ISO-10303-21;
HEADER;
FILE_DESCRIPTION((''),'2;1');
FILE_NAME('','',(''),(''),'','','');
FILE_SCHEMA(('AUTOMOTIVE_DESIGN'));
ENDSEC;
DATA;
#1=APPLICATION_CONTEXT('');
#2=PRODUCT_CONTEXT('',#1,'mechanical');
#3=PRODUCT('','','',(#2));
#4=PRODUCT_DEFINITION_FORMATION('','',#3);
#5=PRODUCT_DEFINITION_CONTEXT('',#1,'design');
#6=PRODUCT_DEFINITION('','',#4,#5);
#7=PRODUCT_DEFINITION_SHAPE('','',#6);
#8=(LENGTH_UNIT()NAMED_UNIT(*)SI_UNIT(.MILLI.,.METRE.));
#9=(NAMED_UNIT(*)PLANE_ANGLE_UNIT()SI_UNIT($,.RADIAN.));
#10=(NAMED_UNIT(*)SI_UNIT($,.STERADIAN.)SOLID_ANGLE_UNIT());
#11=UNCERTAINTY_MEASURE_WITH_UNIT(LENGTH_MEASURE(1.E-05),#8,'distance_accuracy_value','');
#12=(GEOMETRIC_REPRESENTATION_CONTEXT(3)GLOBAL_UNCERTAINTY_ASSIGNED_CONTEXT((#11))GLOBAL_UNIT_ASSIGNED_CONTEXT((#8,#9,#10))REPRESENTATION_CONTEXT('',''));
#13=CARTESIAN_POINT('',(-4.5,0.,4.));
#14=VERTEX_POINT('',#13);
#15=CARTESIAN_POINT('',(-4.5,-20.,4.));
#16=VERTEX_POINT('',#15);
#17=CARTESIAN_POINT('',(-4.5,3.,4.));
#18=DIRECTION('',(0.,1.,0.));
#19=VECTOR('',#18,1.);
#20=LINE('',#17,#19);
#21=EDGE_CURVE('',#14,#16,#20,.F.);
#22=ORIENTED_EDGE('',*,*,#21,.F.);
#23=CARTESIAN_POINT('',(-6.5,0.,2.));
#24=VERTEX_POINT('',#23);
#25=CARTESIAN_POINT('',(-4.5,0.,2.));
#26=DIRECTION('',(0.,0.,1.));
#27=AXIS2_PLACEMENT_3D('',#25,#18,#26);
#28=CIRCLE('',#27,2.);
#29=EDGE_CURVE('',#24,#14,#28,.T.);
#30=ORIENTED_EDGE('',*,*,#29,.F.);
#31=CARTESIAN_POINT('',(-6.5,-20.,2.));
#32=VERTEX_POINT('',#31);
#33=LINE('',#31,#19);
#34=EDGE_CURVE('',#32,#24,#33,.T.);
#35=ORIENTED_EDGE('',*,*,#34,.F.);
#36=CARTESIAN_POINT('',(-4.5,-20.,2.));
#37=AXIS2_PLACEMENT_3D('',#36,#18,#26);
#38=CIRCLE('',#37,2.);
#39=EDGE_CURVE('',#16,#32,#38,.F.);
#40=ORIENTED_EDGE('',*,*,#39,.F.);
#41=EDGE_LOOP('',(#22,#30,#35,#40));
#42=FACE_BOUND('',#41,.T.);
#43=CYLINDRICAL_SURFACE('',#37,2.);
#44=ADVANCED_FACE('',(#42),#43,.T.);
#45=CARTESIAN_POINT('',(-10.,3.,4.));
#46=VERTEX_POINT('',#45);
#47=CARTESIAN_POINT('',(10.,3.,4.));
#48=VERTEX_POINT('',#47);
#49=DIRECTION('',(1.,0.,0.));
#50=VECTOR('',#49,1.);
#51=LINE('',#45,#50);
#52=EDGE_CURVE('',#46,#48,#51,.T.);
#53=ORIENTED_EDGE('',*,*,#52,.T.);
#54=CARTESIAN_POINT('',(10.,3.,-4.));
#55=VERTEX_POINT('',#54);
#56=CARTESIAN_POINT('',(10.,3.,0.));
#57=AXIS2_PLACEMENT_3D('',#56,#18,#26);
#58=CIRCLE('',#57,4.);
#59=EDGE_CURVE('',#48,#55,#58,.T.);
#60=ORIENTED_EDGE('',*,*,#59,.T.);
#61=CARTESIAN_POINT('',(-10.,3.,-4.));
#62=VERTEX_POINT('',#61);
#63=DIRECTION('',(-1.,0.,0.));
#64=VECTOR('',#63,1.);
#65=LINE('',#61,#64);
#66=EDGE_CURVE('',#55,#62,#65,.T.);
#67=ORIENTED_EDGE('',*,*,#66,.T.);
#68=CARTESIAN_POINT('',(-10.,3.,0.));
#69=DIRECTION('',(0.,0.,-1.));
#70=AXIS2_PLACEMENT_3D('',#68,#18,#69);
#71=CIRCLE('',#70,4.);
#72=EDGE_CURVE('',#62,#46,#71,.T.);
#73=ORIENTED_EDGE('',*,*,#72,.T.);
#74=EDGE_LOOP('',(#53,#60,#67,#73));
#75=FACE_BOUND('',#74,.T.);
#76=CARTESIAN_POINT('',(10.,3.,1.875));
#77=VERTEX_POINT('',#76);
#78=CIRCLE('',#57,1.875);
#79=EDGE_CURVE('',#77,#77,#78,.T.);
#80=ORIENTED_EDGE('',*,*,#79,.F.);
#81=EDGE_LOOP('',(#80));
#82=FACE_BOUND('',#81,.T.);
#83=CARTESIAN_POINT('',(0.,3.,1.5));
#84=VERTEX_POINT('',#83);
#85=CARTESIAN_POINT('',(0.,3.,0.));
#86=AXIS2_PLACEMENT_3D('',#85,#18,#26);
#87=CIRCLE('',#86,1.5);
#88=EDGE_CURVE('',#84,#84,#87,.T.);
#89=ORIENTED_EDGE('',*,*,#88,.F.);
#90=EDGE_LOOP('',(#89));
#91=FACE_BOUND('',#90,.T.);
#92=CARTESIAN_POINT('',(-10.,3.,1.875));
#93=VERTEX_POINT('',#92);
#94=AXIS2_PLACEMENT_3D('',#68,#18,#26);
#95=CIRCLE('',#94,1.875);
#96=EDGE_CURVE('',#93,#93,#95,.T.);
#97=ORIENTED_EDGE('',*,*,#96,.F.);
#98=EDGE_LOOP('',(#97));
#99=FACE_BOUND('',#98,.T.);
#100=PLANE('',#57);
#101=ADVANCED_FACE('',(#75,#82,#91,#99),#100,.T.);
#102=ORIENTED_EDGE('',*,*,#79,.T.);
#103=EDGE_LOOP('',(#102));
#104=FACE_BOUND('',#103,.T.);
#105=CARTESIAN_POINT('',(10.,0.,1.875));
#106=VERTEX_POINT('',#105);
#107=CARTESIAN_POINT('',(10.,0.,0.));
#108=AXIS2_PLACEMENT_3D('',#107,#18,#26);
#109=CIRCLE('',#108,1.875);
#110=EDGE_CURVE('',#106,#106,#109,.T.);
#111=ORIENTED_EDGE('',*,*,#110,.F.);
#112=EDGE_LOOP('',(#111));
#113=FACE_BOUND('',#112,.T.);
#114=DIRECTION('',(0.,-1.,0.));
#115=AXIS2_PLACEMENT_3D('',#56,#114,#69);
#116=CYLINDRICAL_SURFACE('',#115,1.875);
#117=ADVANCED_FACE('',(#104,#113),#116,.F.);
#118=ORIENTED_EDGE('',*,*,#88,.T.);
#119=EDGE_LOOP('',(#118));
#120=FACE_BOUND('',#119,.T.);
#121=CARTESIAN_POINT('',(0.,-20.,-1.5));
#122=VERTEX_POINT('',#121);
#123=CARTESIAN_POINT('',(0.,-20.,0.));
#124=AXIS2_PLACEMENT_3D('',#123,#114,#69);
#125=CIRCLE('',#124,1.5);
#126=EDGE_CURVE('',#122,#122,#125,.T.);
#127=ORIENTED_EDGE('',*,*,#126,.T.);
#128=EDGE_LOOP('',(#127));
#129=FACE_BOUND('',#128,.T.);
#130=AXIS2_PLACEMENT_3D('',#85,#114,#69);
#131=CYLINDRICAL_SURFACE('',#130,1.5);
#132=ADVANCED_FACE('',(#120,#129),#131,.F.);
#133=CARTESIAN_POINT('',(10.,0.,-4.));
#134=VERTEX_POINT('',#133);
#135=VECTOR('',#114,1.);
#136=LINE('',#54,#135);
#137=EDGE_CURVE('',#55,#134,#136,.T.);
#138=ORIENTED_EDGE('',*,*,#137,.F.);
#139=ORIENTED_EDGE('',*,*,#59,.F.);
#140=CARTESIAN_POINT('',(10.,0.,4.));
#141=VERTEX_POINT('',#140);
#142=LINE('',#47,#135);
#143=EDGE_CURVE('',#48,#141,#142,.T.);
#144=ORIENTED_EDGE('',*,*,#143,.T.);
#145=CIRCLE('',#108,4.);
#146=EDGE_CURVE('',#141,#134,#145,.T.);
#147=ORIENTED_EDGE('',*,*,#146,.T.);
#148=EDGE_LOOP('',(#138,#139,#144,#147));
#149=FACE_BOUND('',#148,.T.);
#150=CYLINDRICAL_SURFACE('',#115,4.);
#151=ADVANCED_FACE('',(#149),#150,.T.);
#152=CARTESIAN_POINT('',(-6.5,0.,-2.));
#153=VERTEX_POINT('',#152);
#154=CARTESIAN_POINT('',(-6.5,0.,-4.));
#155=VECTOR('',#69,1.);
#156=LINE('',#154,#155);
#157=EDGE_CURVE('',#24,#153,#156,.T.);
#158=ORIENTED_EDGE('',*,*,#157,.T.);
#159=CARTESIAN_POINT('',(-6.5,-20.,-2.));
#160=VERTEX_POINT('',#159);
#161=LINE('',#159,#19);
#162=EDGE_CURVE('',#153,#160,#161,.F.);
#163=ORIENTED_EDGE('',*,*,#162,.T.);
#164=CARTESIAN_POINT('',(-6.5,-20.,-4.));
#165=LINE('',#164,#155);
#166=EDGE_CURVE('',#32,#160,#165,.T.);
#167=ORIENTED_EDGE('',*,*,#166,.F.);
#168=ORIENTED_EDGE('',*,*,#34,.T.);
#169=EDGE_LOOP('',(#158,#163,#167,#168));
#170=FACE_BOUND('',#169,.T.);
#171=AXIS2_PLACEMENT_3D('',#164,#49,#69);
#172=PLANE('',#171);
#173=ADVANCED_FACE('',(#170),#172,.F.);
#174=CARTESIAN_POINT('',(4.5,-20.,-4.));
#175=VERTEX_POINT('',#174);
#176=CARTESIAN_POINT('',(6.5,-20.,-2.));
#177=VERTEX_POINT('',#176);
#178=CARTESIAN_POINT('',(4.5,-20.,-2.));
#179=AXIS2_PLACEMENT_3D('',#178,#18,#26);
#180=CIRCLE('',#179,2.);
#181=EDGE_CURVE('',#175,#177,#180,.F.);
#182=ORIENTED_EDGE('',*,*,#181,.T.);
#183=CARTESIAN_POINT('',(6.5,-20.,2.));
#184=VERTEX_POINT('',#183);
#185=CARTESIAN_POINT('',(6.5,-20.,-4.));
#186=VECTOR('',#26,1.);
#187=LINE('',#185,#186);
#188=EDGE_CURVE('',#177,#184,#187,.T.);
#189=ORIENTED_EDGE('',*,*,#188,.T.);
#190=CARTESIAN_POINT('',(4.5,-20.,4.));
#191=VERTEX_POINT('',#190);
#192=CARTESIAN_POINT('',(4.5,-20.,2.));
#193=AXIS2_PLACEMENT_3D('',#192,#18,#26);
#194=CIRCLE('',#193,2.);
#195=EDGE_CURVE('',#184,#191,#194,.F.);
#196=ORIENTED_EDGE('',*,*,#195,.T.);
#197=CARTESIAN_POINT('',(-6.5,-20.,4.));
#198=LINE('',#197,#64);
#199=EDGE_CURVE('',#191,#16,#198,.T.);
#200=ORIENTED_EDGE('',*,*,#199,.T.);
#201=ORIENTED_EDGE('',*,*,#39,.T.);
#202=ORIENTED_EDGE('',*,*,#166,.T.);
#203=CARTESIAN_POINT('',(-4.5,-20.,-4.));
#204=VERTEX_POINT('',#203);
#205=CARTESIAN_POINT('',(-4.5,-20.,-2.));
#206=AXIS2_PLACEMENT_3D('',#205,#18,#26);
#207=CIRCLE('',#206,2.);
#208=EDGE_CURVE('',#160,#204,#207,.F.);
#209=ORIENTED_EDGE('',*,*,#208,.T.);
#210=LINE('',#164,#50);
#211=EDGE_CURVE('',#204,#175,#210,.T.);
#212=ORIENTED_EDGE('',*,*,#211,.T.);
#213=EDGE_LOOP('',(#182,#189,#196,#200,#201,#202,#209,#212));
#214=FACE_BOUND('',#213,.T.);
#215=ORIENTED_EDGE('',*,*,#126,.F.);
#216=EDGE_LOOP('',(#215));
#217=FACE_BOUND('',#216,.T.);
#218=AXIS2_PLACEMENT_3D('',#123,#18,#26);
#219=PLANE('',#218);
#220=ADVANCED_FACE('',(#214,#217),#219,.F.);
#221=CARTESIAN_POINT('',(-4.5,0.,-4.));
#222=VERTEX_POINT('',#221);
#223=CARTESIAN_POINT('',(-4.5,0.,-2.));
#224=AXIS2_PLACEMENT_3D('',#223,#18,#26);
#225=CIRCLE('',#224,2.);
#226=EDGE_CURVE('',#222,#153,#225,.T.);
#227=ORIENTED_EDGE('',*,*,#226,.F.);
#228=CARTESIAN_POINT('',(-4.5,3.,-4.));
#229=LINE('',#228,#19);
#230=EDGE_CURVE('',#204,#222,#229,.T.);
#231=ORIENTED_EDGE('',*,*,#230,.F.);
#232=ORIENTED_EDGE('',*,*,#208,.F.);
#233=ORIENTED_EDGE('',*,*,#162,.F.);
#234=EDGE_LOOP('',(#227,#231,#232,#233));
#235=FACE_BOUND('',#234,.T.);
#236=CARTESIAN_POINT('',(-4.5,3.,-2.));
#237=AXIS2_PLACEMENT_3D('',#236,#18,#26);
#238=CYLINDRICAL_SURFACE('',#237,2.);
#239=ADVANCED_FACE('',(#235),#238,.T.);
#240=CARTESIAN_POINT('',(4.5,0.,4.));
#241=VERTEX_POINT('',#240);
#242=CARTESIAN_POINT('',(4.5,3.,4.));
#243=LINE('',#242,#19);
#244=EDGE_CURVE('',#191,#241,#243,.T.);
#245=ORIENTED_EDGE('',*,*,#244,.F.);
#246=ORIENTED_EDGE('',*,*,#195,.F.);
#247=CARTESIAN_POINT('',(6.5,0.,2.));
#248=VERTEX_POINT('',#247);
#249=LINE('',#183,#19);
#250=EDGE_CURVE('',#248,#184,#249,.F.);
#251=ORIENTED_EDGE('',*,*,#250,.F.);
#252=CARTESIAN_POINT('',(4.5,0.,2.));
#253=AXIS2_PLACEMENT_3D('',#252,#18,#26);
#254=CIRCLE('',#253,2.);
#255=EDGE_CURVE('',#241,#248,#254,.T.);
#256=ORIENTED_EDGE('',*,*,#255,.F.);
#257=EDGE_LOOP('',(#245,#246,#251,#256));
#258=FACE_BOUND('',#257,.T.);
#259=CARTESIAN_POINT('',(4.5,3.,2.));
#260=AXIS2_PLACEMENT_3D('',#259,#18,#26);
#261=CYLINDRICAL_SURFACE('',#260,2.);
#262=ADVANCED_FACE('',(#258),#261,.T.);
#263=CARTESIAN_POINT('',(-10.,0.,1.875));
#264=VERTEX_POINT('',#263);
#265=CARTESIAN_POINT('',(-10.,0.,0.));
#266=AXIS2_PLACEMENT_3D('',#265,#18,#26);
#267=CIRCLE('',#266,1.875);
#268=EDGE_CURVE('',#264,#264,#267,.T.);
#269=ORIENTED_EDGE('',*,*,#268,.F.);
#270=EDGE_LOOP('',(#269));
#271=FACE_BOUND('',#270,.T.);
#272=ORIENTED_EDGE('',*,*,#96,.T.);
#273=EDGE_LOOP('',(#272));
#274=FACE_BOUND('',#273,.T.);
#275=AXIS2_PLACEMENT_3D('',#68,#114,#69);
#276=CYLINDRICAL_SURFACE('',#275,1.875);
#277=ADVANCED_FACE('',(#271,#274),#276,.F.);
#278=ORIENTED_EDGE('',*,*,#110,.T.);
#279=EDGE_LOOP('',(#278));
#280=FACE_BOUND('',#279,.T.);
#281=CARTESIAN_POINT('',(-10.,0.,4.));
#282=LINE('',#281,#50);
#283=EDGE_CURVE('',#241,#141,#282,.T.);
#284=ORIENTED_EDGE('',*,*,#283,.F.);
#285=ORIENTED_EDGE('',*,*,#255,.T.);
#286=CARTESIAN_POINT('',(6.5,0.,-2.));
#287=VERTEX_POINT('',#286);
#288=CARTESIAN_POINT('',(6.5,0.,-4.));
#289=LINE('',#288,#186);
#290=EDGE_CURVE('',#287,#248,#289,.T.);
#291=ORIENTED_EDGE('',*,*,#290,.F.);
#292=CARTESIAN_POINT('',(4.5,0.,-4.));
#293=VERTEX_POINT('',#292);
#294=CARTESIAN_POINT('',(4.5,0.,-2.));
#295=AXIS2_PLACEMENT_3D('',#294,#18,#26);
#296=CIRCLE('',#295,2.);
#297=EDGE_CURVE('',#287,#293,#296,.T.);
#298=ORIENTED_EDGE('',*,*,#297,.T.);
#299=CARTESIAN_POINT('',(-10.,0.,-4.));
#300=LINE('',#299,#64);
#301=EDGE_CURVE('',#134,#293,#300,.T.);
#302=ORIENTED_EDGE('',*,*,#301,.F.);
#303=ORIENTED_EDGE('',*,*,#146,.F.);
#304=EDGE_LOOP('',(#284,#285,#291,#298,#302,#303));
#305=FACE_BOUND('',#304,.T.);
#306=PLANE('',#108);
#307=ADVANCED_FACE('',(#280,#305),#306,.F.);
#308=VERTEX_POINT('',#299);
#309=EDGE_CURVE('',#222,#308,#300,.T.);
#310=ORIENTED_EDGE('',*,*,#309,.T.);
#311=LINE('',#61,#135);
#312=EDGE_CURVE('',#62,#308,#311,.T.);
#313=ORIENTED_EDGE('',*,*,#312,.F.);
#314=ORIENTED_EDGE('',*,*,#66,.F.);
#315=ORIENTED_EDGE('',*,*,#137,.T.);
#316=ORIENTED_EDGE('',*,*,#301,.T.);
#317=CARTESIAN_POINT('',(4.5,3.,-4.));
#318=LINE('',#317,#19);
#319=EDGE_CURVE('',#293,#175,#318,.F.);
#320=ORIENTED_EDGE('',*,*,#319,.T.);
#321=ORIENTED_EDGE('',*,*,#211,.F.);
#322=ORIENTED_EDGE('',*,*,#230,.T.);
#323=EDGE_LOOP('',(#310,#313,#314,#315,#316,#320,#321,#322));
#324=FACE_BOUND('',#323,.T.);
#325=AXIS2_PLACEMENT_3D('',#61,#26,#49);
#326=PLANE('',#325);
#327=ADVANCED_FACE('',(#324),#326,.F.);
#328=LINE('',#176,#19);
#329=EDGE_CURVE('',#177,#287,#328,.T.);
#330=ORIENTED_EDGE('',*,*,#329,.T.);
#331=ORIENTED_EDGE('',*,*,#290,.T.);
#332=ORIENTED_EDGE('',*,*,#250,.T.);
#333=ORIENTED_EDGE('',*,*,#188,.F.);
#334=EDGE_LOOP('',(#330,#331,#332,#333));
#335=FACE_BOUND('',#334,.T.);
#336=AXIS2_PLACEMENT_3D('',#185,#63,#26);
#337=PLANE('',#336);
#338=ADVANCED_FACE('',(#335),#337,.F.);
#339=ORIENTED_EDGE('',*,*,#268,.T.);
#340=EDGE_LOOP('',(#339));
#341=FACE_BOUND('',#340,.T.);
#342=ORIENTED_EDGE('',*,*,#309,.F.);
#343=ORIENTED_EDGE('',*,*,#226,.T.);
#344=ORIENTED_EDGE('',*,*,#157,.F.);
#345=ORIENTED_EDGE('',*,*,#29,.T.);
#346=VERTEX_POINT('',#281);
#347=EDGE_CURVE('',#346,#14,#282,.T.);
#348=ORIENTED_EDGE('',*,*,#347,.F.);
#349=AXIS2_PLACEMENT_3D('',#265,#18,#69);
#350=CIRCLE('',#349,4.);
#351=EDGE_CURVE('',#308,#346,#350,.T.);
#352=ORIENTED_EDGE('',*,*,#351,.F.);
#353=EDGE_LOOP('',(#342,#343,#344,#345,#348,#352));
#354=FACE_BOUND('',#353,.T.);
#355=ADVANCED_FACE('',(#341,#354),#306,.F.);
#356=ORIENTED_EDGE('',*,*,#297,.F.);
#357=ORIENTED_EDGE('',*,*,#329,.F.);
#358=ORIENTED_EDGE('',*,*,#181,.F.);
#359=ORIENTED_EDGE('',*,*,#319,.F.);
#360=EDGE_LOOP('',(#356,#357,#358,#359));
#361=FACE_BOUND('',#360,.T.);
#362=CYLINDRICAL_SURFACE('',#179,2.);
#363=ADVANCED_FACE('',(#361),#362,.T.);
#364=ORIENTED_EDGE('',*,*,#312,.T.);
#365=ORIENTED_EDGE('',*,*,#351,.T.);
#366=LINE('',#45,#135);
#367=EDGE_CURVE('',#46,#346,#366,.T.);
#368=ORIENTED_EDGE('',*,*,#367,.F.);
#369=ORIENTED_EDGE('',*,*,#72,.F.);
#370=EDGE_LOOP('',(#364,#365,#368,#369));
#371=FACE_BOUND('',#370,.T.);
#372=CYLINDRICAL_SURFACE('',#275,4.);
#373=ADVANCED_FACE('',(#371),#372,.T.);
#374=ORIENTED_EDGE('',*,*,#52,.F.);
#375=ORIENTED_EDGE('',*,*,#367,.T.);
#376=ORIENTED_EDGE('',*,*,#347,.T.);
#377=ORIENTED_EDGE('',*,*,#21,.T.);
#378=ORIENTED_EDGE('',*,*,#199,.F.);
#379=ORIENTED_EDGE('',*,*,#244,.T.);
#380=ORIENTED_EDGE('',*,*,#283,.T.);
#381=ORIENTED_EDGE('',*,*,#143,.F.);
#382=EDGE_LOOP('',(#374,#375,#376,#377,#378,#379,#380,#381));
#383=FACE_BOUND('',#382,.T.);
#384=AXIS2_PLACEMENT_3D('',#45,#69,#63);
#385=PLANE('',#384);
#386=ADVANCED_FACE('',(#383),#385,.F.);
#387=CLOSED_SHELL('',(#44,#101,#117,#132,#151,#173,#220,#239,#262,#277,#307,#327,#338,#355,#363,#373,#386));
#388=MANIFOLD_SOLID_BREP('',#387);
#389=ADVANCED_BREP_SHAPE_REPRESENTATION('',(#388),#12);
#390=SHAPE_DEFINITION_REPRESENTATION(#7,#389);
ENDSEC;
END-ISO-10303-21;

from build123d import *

# Parameters (mm, degrees)
SKETCH1_R           = 1.875
SKETCH1_R_2         = 1.5
BOSS_EXTRUDE1_DEPTH = 3
BOSS_EXTRUDE2_START = 20
SKETCH3_W           = 13
SKETCH3_H           = 8
SKETCH3_R           = 1.5
BOSS_EXTRUDE2_DEPTH = 20
FILLET1_R           = 2


with BuildPart() as part:
    # Sketch1 → Boss-Extrude1 (new body)
    with BuildSketch(Plane(origin=(0, 0, 0), x_dir=(1, 0, 0), z_dir=(0, 1, 0))):
        with BuildLine():
            Line((-10, -4), (10, -4))
            ThreePointArc((10, -4), (14, 0), (10, 4))
            Line((10, 4), (-10, 4))
            ThreePointArc((-10, 4), (-14, 0), (-10, -4))
        make_face()
        with Locations((-10, 0)):
            Circle(SKETCH1_R, mode=Mode.SUBTRACT)
        with Locations((10, 0)):
            Circle(SKETCH1_R, mode=Mode.SUBTRACT)
        Circle(SKETCH1_R_2, mode=Mode.SUBTRACT)
    extrude(amount=BOSS_EXTRUDE1_DEPTH)

    # Sketch3 → Boss-Extrude2 (add)
    with BuildSketch(Plane.XZ.offset(BOSS_EXTRUDE2_START)):
        Rectangle(SKETCH3_W, SKETCH3_H)
        Circle(SKETCH3_R, mode=Mode.SUBTRACT)
    extrude(amount=-BOSS_EXTRUDE2_DEPTH)

    # Fillet1
    fillet1_edges = [part.edges().sort_by_distance(p)[0] for p in [
        (-6.5, -10, 4),
        (6.5, -10, 4),
        (6.5, -10, -4),
        (-6.5, -10, -4),
    ]]
    fillet(fillet1_edges, radius=FILLET1_R)


solid = part.part
